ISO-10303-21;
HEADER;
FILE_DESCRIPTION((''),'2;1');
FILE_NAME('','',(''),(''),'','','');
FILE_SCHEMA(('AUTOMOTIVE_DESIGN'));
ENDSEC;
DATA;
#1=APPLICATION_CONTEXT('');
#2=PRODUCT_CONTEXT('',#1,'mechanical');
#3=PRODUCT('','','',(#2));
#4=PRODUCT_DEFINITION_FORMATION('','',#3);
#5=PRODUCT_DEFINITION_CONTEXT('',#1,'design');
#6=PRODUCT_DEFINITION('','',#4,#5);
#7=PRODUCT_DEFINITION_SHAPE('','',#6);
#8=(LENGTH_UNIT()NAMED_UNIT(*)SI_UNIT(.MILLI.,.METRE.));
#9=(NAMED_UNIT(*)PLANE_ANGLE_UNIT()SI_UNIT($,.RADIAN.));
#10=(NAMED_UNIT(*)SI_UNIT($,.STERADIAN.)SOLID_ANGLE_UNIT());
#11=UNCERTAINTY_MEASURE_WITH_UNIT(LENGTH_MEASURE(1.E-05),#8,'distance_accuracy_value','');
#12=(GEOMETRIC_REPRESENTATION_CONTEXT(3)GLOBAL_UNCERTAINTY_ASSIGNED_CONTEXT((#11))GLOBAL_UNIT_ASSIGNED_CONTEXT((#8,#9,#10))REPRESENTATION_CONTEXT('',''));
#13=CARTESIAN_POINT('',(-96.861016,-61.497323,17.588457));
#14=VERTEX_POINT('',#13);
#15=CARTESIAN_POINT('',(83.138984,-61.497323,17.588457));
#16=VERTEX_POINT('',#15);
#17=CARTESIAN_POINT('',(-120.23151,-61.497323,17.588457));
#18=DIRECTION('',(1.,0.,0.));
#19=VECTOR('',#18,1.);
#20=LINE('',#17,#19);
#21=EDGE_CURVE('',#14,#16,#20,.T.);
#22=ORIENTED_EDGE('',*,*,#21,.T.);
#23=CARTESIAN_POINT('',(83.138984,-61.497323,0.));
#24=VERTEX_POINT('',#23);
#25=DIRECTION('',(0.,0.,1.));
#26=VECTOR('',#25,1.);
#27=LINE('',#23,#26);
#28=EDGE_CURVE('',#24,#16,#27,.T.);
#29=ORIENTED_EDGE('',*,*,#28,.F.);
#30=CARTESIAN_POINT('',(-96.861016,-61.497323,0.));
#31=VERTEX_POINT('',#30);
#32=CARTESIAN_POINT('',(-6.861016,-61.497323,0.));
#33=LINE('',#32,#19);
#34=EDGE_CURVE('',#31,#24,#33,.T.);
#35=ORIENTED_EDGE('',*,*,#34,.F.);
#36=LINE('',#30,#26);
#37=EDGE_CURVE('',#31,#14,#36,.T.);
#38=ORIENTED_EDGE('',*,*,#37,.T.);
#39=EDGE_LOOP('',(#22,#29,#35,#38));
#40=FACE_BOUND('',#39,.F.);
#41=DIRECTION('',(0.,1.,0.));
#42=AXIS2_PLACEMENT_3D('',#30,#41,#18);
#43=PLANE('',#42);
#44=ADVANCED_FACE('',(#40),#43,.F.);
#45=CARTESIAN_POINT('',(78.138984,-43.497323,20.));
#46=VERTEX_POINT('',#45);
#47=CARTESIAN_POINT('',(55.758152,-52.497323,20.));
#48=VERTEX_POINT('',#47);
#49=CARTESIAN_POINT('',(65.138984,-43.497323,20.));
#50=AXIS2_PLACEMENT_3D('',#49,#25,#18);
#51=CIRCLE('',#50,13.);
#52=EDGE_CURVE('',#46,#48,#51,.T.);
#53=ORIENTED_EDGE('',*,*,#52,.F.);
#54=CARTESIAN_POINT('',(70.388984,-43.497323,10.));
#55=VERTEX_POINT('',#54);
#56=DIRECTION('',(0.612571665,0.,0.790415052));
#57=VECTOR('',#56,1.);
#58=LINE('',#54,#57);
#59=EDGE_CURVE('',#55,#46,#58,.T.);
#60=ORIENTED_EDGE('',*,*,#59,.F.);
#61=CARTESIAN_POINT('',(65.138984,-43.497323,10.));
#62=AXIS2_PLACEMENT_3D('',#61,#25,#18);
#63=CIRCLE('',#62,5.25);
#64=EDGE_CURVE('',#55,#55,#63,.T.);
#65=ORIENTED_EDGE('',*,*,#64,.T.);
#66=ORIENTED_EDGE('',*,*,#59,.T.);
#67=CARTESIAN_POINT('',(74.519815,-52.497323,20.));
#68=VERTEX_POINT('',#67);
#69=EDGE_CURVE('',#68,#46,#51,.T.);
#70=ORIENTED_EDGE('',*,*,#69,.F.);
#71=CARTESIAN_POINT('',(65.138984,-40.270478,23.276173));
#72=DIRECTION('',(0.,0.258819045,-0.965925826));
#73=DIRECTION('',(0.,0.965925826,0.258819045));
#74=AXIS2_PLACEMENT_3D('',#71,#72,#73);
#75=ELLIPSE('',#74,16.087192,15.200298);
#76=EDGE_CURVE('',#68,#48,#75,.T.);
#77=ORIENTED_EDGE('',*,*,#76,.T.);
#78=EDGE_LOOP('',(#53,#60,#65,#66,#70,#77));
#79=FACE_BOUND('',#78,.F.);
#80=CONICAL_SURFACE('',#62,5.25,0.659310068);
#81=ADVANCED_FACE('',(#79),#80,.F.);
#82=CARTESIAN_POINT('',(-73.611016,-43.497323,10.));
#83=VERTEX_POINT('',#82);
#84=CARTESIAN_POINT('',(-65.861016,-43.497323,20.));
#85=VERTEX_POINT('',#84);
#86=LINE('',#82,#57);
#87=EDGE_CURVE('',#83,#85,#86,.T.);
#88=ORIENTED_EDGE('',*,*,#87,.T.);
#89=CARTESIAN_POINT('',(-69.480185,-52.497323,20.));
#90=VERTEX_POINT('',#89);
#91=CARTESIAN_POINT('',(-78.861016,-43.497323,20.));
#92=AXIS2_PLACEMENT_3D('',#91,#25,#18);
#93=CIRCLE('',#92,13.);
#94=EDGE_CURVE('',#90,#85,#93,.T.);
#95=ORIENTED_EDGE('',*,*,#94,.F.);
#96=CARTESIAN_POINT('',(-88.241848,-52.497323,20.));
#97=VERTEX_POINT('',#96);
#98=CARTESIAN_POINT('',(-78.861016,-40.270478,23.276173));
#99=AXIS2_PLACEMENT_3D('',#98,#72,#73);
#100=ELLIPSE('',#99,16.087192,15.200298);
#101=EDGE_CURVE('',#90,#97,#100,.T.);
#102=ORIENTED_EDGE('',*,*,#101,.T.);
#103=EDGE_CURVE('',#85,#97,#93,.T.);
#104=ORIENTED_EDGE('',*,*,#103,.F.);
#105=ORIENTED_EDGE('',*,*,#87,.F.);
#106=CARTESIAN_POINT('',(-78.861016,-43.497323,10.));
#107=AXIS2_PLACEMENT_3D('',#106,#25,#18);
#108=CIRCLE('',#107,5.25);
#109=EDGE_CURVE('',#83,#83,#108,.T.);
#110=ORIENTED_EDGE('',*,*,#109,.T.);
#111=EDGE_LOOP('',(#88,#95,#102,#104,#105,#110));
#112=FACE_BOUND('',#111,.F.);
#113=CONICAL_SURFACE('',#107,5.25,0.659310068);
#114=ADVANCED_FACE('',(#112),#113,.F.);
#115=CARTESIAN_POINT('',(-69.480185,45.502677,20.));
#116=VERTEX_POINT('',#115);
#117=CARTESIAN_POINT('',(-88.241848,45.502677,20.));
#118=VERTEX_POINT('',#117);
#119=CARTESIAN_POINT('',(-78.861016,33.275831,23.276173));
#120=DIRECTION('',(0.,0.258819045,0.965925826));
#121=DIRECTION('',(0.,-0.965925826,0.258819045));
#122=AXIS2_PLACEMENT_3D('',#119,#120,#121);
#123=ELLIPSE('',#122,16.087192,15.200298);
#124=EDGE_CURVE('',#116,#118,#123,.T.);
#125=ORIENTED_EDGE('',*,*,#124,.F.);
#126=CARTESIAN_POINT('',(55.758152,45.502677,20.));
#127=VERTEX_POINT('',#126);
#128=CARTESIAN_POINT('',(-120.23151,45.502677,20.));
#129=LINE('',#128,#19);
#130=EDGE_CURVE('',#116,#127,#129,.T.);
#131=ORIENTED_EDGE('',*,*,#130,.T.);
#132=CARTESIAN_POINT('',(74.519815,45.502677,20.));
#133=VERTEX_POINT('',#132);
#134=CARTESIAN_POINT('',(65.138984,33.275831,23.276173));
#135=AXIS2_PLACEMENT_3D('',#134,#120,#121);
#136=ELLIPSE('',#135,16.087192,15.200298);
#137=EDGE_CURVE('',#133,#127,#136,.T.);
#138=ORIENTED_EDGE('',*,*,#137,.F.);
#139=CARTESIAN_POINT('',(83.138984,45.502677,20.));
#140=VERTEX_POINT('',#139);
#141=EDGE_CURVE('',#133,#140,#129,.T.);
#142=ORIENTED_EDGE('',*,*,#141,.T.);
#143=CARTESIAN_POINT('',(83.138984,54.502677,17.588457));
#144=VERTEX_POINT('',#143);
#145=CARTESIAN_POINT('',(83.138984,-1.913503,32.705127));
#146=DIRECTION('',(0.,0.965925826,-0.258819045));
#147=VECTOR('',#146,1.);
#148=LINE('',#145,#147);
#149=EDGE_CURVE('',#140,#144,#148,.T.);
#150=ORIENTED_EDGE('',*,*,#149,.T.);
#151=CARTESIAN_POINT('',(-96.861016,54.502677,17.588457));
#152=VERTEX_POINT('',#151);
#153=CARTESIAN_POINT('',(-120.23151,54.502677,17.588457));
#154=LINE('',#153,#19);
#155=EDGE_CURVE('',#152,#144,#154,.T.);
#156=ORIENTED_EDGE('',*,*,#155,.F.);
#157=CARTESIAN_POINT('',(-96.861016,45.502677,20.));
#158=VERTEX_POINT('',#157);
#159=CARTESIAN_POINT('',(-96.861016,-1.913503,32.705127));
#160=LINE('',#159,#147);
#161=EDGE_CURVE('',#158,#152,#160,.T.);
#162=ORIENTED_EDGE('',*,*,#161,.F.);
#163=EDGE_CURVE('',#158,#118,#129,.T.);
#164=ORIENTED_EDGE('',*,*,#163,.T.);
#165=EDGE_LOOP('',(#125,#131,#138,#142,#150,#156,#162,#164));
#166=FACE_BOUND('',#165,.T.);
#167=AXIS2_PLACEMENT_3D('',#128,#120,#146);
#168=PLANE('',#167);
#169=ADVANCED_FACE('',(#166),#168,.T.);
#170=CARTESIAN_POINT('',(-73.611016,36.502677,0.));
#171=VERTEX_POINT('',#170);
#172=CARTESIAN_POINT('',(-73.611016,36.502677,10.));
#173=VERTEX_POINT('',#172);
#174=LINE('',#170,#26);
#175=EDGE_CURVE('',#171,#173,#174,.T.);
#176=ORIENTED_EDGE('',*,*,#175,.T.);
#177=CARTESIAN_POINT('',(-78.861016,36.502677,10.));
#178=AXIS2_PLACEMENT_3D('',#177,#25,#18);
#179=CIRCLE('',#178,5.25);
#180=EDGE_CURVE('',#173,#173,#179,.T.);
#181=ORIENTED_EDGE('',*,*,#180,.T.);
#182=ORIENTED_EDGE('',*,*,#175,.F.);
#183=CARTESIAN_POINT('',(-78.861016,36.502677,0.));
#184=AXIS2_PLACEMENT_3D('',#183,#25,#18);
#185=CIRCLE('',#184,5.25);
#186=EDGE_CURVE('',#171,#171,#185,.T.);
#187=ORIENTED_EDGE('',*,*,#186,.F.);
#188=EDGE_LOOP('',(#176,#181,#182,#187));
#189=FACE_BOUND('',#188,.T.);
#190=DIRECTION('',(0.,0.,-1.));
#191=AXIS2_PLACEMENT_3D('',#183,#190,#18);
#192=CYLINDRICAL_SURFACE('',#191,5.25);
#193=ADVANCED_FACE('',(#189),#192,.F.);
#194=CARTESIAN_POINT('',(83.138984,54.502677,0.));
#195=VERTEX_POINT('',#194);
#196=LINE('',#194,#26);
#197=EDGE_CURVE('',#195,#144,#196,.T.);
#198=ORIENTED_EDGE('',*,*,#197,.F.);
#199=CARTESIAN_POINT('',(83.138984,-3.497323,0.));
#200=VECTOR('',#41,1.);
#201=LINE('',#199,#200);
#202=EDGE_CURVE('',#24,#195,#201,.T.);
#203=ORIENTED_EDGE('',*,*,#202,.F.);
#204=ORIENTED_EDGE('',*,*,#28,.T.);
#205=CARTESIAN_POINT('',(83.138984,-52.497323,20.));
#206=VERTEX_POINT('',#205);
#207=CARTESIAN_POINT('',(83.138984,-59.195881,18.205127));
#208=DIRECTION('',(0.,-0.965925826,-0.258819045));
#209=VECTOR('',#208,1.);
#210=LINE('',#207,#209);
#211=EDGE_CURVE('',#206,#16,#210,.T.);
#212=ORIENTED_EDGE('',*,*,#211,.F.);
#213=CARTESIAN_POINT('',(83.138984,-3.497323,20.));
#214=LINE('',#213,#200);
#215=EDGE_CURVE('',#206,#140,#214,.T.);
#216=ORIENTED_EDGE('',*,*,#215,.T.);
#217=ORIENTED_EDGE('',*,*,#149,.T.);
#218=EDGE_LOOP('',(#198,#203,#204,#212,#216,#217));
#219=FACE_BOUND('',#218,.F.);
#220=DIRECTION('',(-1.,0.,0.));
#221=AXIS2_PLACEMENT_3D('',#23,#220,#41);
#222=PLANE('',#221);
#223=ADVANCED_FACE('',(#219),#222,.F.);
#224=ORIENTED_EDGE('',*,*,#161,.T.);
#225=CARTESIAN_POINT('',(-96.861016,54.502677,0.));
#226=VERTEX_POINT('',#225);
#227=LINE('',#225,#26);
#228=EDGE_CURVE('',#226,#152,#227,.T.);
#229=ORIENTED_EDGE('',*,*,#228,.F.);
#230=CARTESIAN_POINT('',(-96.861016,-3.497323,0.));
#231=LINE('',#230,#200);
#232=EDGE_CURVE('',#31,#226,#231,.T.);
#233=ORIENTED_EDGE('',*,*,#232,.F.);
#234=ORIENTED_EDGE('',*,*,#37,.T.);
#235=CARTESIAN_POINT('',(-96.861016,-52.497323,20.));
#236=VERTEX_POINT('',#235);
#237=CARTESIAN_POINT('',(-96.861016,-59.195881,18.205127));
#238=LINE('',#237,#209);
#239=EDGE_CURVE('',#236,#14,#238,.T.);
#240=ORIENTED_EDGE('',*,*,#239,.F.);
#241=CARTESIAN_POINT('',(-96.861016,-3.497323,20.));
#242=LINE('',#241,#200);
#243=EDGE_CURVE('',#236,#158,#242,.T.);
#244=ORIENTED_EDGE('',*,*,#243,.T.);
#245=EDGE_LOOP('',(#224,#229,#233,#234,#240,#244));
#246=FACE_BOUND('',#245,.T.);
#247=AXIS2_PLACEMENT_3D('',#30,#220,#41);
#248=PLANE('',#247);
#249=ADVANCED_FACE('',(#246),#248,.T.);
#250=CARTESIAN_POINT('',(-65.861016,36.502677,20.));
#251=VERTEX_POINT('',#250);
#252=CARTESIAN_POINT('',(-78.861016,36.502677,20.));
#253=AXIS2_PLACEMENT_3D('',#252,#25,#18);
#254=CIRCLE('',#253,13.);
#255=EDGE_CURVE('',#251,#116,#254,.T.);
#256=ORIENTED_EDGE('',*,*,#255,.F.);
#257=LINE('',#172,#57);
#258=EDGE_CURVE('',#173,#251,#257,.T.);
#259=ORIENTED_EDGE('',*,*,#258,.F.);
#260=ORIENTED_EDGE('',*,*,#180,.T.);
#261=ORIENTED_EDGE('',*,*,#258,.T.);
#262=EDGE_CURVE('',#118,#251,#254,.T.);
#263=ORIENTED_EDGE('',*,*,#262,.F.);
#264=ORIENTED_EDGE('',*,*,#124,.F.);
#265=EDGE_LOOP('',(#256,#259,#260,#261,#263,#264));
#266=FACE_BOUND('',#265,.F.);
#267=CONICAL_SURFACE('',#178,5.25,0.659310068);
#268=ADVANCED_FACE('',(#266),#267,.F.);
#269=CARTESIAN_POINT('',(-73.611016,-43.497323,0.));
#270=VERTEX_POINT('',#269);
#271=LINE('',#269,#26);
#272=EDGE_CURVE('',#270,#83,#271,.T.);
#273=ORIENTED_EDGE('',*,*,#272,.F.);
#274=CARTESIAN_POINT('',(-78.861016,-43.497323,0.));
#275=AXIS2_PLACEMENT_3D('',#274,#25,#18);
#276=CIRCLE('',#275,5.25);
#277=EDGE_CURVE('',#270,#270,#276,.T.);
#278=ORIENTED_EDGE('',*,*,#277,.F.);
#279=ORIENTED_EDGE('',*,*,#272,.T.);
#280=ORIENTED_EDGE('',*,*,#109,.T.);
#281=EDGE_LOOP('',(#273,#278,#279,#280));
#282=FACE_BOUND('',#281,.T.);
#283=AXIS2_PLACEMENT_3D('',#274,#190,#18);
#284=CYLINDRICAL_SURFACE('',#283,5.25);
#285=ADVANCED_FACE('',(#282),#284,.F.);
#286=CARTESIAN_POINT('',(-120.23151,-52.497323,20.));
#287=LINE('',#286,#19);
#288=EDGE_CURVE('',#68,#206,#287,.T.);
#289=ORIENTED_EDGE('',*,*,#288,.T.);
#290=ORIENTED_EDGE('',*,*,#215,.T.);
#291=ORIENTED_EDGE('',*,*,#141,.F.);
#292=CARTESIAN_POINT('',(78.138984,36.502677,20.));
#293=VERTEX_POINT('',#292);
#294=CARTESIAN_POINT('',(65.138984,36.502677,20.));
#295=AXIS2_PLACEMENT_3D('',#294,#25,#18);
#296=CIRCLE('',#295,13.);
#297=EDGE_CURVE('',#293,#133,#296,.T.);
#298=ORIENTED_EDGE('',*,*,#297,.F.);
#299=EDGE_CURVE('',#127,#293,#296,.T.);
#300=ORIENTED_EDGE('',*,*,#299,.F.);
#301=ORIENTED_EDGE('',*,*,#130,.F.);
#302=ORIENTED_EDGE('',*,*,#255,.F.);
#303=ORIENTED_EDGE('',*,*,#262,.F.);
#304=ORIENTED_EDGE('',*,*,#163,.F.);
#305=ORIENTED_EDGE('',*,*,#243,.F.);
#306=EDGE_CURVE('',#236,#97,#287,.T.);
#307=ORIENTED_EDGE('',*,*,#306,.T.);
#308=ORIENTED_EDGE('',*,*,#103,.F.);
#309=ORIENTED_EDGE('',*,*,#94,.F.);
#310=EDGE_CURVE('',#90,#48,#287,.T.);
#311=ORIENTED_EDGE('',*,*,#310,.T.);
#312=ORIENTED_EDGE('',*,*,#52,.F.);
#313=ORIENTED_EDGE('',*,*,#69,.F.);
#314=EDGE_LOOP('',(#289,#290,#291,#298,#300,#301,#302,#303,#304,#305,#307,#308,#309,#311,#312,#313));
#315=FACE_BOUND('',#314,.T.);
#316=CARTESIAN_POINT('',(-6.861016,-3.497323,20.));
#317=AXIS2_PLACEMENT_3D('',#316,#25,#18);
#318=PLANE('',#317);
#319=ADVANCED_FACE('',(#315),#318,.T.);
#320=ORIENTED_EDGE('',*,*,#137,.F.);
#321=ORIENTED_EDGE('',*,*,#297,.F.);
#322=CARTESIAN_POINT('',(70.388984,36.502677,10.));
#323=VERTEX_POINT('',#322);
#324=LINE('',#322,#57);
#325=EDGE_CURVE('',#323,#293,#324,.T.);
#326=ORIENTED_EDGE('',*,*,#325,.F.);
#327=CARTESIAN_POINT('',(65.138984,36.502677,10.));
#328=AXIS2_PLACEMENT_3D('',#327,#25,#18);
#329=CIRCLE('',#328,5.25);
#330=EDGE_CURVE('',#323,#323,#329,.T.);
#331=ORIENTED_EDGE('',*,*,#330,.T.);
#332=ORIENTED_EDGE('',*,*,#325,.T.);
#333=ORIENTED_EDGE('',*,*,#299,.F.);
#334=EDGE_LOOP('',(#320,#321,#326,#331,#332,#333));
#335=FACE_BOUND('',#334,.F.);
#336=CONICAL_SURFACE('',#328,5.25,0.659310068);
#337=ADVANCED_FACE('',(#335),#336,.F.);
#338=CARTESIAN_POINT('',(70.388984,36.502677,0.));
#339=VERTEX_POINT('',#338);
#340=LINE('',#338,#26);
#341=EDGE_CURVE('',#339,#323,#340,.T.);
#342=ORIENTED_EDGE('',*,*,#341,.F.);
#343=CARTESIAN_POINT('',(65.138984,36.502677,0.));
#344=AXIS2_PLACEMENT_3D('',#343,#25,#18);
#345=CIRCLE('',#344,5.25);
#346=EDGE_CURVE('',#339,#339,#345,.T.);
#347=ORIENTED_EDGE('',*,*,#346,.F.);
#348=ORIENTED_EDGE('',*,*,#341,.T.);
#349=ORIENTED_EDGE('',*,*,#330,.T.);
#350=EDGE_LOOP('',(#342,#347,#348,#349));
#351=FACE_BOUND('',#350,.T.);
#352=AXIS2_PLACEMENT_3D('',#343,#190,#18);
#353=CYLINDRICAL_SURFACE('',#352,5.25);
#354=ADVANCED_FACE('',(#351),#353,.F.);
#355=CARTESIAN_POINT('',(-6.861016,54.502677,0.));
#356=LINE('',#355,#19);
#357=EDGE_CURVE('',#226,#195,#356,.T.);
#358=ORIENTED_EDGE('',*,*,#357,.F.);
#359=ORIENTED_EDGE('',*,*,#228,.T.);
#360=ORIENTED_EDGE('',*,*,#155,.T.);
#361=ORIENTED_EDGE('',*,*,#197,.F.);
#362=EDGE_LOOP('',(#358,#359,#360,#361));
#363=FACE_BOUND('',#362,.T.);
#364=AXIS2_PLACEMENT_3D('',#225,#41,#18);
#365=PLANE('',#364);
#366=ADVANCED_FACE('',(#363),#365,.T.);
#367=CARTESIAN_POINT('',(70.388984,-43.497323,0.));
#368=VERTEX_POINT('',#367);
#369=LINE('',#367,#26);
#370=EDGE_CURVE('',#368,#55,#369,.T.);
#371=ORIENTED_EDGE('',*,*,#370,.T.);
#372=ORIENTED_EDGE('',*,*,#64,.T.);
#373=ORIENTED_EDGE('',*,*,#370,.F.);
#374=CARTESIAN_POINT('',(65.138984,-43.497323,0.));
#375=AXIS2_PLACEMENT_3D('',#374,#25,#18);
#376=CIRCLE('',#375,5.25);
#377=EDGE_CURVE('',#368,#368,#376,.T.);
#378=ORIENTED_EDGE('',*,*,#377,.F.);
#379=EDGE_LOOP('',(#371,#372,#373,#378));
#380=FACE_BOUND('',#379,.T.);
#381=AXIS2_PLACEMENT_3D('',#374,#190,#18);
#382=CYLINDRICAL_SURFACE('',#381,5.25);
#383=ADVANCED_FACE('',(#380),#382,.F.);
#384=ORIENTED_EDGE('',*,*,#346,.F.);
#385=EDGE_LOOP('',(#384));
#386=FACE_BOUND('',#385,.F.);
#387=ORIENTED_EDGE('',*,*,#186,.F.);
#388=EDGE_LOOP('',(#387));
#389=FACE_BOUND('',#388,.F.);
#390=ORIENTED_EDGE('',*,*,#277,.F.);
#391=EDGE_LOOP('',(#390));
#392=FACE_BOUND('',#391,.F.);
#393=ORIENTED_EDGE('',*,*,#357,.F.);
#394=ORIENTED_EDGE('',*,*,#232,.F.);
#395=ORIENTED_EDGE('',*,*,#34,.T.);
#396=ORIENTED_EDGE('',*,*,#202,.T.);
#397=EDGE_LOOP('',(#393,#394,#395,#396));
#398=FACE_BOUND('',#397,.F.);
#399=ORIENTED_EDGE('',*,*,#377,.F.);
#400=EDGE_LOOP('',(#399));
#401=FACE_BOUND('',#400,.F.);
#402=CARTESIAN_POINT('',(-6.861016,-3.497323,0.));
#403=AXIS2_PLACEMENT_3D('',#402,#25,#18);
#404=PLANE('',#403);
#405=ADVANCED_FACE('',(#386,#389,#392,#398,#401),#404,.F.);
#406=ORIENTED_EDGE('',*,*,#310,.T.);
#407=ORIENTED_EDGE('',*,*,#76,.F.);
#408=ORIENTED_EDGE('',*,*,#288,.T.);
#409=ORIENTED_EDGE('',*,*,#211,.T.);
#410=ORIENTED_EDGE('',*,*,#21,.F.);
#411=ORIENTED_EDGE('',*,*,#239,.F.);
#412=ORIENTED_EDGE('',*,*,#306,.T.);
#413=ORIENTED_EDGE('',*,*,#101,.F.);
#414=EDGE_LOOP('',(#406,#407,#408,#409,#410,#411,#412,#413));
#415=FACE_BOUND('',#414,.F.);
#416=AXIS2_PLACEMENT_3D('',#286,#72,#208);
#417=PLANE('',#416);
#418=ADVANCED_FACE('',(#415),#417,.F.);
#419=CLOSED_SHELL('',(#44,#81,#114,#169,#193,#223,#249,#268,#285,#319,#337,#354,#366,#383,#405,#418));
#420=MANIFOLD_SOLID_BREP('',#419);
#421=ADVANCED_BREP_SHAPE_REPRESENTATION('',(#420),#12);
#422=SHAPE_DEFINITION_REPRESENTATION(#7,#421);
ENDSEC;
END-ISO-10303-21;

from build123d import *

# Parameters (mm, degrees)
F0_W        = 180
F0_H        = 116
F0_R        = 5.25
F1_DEPTH    = 20
F2_SIZE2    = 7.75
F2_SIZE     = 10
F2_2_SIZE2  = 7.75
F2_2_SIZE   = 10
F2_3_SIZE2  = 7.75
F2_3_SIZE   = 10
F2_4_SIZE2  = 7.75
F2_4_SIZE   = 10
F3_T1_DEPTH = 226.7409882636


# Not quite as in the source:
# - a fillet or chamfer that OpenCascade refuses, or shapes differently, is made with other operations: its cross-section is extruded or revolved along the edge and cut away or added


with BuildPart() as f1:
    # F0 (on Top) → F1 (new body)
    with BuildSketch(Plane.XY):
        with Locations((-6.8610161543, -3.4973233796)):
            Rectangle(F0_W, F0_H)
        with Locations((-78.8610161543, -43.4973233796)):
            Circle(F0_R, mode=Mode.SUBTRACT)
        with Locations((65.1389838457, -43.4973233796)):
            Circle(F0_R, mode=Mode.SUBTRACT)
        with Locations((-78.8610161543, 36.5026766204)):
            Circle(F0_R, mode=Mode.SUBTRACT)
        with Locations((65.1389838457, 36.5026766204)):
            Circle(F0_R, mode=Mode.SUBTRACT)
    extrude(amount=F1_DEPTH)

    # F2
    f2_edges = [f1.edges().sort_by_distance(p)[0] for p in [
        (59.888984, -43.497323, 20),
    ]]
    f2_side = f1.faces().sort_by_distance((59.888984, -43.497323, 10))[0]
    chamfer(f2_edges, length=F2_SIZE, length2=F2_SIZE2, reference=f2_side)

    # F2#2
    f2_2_edges = [f1.edges().sort_by_distance(p)[0] for p in [
        (-84.111016, -43.497323, 20),
    ]]
    f2_2_side = f1.faces().sort_by_distance((-84.111016, -43.497323, 10))[0]
    chamfer(f2_2_edges, length=F2_2_SIZE, length2=F2_2_SIZE2, reference=f2_2_side)

    # F2#3
    f2_3_edges = [f1.edges().sort_by_distance(p)[0] for p in [
        (-84.111016, 36.502677, 20),
    ]]
    f2_3_side = f1.faces().sort_by_distance((-84.111016, 36.502677, 10))[0]
    chamfer(f2_3_edges, length=F2_3_SIZE, length2=F2_3_SIZE2, reference=f2_3_side)

    # F2#4
    f2_4_edges = [f1.edges().sort_by_distance(p)[0] for p in [
        (59.888984, 36.502677, 20),
    ]]
    f2_4_side = f1.faces().sort_by_distance((59.888984, 36.502677, 10))[0]
    chamfer(f2_4_edges, length=F2_4_SIZE, length2=F2_4_SIZE2, reference=f2_4_side)

    # F3: chamfer of 9 x 2.4115427319 on 2 edges, made by hand

    # F3_s2 → F3_t1 (cut)
    with BuildSketch(Plane.YZ.offset(-120.2315102861)):
        Polygon((-52.4973233796, 20), (-61.4973233796, 17.5884572681), (-61.4973233796, 20), align=None)
        Polygon((45.5026766204, 20), (54.5026766204, 17.5884572681), (54.5026766204, 20), align=None)
    extrude(amount=F3_T1_DEPTH, mode=Mode.SUBTRACT)


solid = f1.part
